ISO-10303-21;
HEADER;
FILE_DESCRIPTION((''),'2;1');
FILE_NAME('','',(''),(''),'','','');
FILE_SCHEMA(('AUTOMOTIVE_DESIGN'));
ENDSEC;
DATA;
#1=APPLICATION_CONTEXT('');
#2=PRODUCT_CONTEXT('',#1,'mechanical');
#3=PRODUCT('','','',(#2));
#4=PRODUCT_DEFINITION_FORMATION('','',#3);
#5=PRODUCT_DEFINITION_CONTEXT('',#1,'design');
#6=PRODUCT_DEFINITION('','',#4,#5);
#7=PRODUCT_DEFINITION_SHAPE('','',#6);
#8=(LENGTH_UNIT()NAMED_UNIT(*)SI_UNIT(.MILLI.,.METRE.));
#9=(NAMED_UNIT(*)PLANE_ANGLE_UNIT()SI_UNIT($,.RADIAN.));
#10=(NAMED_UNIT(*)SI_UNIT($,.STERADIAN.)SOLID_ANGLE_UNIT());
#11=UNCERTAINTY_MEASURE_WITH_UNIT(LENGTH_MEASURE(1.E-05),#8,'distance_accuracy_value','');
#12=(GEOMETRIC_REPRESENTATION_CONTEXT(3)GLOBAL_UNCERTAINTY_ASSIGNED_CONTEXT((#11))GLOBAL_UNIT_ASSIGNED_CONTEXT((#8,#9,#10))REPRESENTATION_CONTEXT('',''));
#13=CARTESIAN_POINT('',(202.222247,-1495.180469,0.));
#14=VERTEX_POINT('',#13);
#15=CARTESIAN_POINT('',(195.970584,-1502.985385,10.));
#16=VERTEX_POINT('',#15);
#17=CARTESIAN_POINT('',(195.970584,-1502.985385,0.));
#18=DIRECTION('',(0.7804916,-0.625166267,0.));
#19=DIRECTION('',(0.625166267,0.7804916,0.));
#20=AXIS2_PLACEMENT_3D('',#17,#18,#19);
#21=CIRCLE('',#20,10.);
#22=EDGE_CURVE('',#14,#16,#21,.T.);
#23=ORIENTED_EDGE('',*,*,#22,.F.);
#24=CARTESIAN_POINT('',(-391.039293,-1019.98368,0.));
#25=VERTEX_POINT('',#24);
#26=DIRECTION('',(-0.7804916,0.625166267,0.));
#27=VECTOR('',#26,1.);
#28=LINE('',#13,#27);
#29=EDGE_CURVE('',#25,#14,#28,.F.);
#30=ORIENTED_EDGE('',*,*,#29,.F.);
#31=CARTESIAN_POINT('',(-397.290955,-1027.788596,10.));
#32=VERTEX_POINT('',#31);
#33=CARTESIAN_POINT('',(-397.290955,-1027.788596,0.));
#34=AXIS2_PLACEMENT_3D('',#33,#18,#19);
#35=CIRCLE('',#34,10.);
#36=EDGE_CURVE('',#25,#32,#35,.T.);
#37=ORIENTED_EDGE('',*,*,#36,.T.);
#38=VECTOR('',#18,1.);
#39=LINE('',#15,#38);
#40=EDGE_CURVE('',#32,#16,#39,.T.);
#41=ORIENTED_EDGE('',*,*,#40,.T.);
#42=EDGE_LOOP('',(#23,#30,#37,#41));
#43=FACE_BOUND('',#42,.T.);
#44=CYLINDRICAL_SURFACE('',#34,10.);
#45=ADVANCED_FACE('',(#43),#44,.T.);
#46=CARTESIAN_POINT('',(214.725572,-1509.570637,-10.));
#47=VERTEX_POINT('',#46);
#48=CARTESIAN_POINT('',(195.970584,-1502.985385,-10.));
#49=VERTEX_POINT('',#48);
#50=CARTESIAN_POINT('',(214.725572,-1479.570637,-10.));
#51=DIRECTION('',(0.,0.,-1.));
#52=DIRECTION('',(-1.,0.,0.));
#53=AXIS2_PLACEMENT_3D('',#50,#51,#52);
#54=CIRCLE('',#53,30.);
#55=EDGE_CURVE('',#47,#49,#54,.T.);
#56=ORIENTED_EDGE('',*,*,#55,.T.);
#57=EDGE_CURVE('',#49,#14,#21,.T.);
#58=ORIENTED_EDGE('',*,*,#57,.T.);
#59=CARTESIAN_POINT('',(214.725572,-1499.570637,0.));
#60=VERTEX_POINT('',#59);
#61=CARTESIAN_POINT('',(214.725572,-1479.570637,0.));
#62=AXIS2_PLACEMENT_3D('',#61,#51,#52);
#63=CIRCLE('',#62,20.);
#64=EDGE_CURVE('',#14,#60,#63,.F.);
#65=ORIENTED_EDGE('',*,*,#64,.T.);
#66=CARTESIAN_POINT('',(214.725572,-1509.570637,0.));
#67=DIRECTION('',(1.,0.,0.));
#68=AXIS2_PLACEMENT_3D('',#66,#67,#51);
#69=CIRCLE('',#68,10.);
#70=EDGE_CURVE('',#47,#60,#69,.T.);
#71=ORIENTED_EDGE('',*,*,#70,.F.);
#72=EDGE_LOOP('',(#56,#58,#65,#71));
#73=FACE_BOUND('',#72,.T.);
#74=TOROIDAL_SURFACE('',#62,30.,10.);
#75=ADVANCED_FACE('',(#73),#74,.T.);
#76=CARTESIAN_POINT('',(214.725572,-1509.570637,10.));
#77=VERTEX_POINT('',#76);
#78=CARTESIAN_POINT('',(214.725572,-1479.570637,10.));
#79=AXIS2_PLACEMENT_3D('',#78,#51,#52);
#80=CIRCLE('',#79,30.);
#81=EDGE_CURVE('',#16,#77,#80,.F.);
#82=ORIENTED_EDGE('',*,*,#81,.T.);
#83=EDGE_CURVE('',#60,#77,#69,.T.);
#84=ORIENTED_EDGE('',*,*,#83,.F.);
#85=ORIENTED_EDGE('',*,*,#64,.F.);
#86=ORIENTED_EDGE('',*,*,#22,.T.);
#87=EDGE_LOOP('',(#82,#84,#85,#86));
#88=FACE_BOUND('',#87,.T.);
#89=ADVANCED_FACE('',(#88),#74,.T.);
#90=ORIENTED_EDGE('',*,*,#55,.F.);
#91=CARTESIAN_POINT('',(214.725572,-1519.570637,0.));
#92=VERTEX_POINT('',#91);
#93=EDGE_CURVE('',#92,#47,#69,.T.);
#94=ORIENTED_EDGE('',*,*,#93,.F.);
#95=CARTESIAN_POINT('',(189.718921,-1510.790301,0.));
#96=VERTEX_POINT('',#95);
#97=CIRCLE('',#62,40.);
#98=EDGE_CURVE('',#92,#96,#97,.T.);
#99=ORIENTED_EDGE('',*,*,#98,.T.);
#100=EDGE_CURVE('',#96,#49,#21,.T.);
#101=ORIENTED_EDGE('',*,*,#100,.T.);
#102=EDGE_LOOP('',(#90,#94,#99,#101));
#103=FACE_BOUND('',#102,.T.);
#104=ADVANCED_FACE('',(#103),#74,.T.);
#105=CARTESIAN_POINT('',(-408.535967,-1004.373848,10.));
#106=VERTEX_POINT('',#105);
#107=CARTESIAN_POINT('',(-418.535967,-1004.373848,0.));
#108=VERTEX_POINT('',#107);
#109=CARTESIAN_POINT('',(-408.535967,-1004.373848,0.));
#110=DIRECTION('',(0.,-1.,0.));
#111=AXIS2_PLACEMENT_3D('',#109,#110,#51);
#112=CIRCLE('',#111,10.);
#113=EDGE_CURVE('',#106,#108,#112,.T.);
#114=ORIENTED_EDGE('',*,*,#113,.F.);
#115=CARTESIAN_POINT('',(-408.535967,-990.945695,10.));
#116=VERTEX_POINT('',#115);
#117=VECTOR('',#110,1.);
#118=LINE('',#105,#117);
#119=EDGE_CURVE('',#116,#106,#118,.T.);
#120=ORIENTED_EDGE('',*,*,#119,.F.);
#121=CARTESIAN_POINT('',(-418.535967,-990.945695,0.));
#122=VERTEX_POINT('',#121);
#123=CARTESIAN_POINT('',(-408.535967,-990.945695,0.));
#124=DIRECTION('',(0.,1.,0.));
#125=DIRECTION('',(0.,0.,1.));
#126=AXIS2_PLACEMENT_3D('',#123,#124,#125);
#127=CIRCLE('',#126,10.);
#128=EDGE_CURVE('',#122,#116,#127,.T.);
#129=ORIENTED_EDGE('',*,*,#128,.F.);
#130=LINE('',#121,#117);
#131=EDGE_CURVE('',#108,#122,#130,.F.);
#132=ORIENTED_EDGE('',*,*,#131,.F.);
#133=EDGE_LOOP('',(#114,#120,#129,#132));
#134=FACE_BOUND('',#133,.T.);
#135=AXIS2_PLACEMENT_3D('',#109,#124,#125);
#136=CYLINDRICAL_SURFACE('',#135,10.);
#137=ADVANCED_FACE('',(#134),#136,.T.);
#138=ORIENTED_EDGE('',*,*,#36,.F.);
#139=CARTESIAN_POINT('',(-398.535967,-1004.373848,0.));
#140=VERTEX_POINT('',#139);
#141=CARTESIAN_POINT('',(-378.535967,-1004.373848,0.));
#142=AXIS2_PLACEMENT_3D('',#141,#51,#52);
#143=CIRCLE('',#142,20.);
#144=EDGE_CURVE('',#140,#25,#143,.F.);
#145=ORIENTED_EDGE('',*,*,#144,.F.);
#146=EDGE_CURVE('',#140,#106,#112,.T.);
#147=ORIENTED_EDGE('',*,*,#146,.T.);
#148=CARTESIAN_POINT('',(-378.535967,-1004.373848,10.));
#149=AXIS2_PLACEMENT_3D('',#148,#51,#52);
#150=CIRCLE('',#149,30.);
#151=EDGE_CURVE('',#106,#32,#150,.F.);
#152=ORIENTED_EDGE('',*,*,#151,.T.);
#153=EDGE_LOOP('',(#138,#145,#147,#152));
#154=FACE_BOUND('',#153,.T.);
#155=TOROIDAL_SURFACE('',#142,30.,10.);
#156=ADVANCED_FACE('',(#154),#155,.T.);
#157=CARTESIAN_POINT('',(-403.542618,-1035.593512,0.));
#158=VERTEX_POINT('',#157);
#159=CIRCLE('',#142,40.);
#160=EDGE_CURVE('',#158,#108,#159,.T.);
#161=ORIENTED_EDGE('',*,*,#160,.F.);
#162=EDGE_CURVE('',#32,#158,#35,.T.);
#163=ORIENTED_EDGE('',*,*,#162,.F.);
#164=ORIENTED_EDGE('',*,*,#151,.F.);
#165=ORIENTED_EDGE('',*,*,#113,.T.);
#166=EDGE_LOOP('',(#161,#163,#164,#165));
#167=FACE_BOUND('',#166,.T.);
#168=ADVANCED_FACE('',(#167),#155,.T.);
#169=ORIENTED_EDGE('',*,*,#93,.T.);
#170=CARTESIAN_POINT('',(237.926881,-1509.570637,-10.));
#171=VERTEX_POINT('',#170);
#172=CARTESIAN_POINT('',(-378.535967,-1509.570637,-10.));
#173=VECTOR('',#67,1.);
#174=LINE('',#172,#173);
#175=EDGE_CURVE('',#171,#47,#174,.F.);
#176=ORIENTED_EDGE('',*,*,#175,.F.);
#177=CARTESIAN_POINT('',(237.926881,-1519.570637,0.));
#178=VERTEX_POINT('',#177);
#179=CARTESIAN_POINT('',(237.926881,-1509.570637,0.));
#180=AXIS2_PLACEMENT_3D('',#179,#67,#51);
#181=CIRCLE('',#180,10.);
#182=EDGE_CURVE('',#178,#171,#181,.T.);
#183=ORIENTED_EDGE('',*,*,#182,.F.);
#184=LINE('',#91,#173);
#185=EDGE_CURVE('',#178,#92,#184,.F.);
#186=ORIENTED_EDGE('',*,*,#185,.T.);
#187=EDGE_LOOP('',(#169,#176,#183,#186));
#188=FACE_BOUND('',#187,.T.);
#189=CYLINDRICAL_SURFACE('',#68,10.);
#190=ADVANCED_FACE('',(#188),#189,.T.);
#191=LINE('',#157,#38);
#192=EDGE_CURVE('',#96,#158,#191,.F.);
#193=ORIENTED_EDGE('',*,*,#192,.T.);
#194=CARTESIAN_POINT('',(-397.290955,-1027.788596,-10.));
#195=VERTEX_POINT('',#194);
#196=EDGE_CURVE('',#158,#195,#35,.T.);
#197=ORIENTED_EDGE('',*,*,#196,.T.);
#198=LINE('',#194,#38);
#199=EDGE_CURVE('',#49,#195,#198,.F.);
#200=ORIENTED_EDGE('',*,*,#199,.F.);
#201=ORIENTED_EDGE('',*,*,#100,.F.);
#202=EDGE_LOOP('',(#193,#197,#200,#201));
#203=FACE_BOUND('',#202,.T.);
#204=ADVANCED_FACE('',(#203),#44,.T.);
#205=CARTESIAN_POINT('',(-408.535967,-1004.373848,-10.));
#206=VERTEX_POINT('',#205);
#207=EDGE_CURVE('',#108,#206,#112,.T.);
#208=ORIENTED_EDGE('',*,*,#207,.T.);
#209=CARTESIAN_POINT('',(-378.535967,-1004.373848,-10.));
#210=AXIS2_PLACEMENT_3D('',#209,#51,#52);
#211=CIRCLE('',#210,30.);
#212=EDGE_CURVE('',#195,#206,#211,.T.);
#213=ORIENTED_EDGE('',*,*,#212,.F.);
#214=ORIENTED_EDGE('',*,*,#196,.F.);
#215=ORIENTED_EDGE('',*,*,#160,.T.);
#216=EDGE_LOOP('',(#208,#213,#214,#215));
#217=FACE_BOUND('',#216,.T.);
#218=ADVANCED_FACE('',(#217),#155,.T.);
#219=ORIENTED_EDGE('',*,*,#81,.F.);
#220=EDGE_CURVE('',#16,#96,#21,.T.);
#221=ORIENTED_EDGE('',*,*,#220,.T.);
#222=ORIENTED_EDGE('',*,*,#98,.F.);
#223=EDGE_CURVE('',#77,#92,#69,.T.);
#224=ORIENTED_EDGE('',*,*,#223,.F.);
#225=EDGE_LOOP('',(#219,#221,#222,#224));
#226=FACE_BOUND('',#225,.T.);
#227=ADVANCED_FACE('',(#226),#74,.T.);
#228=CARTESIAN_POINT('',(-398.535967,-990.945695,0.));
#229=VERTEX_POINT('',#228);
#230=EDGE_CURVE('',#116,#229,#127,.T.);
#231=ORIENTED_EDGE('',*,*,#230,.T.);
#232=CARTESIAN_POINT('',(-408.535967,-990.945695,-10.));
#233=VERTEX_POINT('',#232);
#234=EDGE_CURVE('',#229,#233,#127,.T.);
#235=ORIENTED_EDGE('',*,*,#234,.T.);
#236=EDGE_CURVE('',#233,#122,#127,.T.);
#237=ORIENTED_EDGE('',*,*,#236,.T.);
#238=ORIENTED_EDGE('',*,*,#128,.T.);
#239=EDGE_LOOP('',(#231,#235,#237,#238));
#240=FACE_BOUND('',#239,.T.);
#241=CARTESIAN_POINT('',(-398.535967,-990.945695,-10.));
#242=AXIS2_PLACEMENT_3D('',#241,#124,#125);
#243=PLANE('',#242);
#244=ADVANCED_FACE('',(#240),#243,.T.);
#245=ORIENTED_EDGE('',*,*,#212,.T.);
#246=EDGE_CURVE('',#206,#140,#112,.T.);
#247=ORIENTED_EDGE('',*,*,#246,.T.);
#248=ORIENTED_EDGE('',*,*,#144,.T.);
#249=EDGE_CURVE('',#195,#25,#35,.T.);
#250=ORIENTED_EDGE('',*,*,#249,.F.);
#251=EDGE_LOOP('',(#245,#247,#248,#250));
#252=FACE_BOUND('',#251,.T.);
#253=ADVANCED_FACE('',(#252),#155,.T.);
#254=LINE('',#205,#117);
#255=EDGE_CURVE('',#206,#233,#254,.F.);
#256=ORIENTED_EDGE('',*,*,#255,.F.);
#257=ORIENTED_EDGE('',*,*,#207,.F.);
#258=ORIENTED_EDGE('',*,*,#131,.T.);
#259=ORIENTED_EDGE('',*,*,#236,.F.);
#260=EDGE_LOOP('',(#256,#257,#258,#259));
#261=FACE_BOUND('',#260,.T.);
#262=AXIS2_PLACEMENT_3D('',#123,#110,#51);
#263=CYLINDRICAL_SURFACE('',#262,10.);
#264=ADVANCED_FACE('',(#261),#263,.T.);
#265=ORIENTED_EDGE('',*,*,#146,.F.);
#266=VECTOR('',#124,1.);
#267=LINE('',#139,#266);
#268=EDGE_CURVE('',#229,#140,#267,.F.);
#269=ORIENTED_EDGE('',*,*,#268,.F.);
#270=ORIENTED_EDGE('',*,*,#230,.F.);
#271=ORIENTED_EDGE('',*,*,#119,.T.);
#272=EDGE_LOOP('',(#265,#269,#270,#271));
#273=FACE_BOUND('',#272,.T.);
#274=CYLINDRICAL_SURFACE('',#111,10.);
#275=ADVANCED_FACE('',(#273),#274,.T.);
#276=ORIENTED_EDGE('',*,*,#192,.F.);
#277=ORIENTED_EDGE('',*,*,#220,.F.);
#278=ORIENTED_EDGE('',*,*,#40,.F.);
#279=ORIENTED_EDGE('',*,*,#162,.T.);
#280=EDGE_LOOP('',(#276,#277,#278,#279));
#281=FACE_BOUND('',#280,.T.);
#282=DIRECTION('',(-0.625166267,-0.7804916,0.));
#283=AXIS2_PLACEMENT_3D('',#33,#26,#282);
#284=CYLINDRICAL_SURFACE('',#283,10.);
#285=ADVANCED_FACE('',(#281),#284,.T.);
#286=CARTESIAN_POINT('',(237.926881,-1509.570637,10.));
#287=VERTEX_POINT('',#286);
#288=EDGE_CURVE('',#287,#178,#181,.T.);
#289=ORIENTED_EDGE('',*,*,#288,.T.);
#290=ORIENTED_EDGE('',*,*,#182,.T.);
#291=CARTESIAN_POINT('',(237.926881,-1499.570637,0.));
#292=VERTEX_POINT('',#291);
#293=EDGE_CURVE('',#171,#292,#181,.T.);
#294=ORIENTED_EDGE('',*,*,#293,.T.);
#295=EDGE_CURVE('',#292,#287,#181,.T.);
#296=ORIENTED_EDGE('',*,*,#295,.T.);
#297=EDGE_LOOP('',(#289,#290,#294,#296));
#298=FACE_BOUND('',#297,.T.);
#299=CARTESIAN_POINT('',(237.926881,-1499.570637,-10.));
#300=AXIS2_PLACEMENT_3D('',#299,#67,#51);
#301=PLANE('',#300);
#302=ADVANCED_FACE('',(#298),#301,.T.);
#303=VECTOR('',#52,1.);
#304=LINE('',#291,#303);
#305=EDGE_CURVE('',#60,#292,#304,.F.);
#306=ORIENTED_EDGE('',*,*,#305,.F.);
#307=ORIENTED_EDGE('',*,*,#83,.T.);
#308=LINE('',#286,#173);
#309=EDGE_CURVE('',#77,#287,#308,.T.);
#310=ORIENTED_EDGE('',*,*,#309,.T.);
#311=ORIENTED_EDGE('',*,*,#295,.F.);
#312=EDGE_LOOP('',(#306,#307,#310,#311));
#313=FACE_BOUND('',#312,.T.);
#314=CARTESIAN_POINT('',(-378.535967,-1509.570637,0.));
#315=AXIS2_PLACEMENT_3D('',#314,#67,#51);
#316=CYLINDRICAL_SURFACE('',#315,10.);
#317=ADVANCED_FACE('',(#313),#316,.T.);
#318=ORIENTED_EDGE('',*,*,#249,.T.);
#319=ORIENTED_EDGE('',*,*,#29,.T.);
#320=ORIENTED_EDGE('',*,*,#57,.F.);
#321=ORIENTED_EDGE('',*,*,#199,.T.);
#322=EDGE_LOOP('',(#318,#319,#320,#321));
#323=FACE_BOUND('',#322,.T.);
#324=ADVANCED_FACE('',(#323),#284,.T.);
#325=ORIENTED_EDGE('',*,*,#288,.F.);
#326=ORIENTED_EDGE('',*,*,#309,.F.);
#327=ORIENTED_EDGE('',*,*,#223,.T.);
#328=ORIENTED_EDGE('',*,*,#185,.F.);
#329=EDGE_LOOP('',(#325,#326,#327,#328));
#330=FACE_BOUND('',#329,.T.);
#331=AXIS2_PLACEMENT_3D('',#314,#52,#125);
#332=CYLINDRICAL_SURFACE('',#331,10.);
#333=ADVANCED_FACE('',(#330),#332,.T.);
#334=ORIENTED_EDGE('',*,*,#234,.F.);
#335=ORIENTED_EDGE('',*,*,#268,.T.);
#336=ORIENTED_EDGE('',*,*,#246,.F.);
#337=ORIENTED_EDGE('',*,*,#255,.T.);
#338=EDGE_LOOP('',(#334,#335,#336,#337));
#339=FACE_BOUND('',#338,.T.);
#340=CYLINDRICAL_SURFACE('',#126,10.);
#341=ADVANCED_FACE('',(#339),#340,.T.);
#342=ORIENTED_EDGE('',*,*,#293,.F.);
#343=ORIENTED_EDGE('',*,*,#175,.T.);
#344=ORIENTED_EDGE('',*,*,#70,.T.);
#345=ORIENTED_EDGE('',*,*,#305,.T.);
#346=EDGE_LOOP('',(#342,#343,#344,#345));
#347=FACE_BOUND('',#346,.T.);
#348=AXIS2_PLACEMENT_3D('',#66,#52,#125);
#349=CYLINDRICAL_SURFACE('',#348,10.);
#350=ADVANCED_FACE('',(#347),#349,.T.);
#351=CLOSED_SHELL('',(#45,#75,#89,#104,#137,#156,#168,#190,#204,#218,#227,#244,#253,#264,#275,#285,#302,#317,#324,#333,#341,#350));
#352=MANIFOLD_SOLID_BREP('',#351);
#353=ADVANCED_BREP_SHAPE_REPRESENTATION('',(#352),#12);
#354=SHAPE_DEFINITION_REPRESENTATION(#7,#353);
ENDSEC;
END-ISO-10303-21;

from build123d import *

# Parameters (mm, degrees)
BOSS_EXTRUDE1_DEPTH      = 10
BOSS_EXTRUDE1_DEPTH_BACK = 10
FILLET1_R                = 10


with BuildPart() as part:
    # Sketch1 → Boss-Extrude1 (new, two sides: drawn at the far end of the back side and taken through both)
    with BuildSketch(Plane.XY.offset(-BOSS_EXTRUDE1_DEPTH_BACK)):
        with BuildLine():
            Line((237.926881338, -1499.570637215), (237.926881338, -1519.570637215))
            Line((237.926881338, -1519.570637215), (214.725572022, -1519.570637215))
            ThreePointArc((214.725572022, -1519.570637215), (201.473903455, -1517.311772335), (189.718921324, -1510.790301224))
            Line((189.718921324, -1510.790301224), (-403.542618158, -1035.59351223))
            ThreePointArc((-403.542618158, -1035.59351223), (-414.593324739, -1021.690516088), (-418.53596746, -1004.37384822))
            Line((-418.53596746, -1004.37384822), (-418.53596746, -990.945694684))
            Line((-418.53596746, -990.945694684), (-398.53596746, -990.945694684))
            Line((-398.53596746, -990.945694684), (-398.53596746, -1004.37384822))
            ThreePointArc((-398.53596746, -1004.37384822), (-396.5646461, -1013.032182154), (-391.039292809, -1019.983680225))
            Line((-391.039292809, -1019.983680225), (202.222246673, -1495.180469219))
            ThreePointArc((202.222246673, -1495.180469219), (208.099737738, -1498.441204775), (214.725572022, -1499.570637215))
            Line((214.725572022, -1499.570637215), (237.926881338, -1499.570637215))
        make_face()
    extrude(amount=BOSS_EXTRUDE1_DEPTH + BOSS_EXTRUDE1_DEPTH_BACK)

    # Fillet1
    fillet1_edges = [part.edges().sort_by_distance(p)[0] for p in [
        (226.32622668, -1499.570637215, -10),
        (208.099737738, -1498.441204775, -10),
        (-398.53596746, -997.659771452, -10),
        (-396.5646461, -1013.032182154, -10),
        (-418.53596746, -997.659771452, -10),
        (-414.593324739, -1021.690516088, -10),
        (226.32622668, -1519.570637215, -10),
        (201.473903455, -1517.311772335, -10),
        (226.32622668, -1499.570637215, 10),
        (208.099737738, -1498.441204775, 10),
        (-398.53596746, -997.659771452, 10),
        (-396.5646461, -1013.032182154, 10),
        (-418.53596746, -997.659771452, 10),
        (-414.593324739, -1021.690516088, 10),
        (226.32622668, -1519.570637215, 10),
        (201.473903455, -1517.311772335, 10),
        (-94.408523068, -1257.582074722, -10),
        (-106.911848417, -1273.191906727, -10),
        (-94.408523068, -1257.582074722, 10),
        (-106.911848417, -1273.191906727, 10),
    ]]
    fillet(fillet1_edges, radius=FILLET1_R - 0.0001)  # a hair under: the kernel refuses the full size


solid = part.part
